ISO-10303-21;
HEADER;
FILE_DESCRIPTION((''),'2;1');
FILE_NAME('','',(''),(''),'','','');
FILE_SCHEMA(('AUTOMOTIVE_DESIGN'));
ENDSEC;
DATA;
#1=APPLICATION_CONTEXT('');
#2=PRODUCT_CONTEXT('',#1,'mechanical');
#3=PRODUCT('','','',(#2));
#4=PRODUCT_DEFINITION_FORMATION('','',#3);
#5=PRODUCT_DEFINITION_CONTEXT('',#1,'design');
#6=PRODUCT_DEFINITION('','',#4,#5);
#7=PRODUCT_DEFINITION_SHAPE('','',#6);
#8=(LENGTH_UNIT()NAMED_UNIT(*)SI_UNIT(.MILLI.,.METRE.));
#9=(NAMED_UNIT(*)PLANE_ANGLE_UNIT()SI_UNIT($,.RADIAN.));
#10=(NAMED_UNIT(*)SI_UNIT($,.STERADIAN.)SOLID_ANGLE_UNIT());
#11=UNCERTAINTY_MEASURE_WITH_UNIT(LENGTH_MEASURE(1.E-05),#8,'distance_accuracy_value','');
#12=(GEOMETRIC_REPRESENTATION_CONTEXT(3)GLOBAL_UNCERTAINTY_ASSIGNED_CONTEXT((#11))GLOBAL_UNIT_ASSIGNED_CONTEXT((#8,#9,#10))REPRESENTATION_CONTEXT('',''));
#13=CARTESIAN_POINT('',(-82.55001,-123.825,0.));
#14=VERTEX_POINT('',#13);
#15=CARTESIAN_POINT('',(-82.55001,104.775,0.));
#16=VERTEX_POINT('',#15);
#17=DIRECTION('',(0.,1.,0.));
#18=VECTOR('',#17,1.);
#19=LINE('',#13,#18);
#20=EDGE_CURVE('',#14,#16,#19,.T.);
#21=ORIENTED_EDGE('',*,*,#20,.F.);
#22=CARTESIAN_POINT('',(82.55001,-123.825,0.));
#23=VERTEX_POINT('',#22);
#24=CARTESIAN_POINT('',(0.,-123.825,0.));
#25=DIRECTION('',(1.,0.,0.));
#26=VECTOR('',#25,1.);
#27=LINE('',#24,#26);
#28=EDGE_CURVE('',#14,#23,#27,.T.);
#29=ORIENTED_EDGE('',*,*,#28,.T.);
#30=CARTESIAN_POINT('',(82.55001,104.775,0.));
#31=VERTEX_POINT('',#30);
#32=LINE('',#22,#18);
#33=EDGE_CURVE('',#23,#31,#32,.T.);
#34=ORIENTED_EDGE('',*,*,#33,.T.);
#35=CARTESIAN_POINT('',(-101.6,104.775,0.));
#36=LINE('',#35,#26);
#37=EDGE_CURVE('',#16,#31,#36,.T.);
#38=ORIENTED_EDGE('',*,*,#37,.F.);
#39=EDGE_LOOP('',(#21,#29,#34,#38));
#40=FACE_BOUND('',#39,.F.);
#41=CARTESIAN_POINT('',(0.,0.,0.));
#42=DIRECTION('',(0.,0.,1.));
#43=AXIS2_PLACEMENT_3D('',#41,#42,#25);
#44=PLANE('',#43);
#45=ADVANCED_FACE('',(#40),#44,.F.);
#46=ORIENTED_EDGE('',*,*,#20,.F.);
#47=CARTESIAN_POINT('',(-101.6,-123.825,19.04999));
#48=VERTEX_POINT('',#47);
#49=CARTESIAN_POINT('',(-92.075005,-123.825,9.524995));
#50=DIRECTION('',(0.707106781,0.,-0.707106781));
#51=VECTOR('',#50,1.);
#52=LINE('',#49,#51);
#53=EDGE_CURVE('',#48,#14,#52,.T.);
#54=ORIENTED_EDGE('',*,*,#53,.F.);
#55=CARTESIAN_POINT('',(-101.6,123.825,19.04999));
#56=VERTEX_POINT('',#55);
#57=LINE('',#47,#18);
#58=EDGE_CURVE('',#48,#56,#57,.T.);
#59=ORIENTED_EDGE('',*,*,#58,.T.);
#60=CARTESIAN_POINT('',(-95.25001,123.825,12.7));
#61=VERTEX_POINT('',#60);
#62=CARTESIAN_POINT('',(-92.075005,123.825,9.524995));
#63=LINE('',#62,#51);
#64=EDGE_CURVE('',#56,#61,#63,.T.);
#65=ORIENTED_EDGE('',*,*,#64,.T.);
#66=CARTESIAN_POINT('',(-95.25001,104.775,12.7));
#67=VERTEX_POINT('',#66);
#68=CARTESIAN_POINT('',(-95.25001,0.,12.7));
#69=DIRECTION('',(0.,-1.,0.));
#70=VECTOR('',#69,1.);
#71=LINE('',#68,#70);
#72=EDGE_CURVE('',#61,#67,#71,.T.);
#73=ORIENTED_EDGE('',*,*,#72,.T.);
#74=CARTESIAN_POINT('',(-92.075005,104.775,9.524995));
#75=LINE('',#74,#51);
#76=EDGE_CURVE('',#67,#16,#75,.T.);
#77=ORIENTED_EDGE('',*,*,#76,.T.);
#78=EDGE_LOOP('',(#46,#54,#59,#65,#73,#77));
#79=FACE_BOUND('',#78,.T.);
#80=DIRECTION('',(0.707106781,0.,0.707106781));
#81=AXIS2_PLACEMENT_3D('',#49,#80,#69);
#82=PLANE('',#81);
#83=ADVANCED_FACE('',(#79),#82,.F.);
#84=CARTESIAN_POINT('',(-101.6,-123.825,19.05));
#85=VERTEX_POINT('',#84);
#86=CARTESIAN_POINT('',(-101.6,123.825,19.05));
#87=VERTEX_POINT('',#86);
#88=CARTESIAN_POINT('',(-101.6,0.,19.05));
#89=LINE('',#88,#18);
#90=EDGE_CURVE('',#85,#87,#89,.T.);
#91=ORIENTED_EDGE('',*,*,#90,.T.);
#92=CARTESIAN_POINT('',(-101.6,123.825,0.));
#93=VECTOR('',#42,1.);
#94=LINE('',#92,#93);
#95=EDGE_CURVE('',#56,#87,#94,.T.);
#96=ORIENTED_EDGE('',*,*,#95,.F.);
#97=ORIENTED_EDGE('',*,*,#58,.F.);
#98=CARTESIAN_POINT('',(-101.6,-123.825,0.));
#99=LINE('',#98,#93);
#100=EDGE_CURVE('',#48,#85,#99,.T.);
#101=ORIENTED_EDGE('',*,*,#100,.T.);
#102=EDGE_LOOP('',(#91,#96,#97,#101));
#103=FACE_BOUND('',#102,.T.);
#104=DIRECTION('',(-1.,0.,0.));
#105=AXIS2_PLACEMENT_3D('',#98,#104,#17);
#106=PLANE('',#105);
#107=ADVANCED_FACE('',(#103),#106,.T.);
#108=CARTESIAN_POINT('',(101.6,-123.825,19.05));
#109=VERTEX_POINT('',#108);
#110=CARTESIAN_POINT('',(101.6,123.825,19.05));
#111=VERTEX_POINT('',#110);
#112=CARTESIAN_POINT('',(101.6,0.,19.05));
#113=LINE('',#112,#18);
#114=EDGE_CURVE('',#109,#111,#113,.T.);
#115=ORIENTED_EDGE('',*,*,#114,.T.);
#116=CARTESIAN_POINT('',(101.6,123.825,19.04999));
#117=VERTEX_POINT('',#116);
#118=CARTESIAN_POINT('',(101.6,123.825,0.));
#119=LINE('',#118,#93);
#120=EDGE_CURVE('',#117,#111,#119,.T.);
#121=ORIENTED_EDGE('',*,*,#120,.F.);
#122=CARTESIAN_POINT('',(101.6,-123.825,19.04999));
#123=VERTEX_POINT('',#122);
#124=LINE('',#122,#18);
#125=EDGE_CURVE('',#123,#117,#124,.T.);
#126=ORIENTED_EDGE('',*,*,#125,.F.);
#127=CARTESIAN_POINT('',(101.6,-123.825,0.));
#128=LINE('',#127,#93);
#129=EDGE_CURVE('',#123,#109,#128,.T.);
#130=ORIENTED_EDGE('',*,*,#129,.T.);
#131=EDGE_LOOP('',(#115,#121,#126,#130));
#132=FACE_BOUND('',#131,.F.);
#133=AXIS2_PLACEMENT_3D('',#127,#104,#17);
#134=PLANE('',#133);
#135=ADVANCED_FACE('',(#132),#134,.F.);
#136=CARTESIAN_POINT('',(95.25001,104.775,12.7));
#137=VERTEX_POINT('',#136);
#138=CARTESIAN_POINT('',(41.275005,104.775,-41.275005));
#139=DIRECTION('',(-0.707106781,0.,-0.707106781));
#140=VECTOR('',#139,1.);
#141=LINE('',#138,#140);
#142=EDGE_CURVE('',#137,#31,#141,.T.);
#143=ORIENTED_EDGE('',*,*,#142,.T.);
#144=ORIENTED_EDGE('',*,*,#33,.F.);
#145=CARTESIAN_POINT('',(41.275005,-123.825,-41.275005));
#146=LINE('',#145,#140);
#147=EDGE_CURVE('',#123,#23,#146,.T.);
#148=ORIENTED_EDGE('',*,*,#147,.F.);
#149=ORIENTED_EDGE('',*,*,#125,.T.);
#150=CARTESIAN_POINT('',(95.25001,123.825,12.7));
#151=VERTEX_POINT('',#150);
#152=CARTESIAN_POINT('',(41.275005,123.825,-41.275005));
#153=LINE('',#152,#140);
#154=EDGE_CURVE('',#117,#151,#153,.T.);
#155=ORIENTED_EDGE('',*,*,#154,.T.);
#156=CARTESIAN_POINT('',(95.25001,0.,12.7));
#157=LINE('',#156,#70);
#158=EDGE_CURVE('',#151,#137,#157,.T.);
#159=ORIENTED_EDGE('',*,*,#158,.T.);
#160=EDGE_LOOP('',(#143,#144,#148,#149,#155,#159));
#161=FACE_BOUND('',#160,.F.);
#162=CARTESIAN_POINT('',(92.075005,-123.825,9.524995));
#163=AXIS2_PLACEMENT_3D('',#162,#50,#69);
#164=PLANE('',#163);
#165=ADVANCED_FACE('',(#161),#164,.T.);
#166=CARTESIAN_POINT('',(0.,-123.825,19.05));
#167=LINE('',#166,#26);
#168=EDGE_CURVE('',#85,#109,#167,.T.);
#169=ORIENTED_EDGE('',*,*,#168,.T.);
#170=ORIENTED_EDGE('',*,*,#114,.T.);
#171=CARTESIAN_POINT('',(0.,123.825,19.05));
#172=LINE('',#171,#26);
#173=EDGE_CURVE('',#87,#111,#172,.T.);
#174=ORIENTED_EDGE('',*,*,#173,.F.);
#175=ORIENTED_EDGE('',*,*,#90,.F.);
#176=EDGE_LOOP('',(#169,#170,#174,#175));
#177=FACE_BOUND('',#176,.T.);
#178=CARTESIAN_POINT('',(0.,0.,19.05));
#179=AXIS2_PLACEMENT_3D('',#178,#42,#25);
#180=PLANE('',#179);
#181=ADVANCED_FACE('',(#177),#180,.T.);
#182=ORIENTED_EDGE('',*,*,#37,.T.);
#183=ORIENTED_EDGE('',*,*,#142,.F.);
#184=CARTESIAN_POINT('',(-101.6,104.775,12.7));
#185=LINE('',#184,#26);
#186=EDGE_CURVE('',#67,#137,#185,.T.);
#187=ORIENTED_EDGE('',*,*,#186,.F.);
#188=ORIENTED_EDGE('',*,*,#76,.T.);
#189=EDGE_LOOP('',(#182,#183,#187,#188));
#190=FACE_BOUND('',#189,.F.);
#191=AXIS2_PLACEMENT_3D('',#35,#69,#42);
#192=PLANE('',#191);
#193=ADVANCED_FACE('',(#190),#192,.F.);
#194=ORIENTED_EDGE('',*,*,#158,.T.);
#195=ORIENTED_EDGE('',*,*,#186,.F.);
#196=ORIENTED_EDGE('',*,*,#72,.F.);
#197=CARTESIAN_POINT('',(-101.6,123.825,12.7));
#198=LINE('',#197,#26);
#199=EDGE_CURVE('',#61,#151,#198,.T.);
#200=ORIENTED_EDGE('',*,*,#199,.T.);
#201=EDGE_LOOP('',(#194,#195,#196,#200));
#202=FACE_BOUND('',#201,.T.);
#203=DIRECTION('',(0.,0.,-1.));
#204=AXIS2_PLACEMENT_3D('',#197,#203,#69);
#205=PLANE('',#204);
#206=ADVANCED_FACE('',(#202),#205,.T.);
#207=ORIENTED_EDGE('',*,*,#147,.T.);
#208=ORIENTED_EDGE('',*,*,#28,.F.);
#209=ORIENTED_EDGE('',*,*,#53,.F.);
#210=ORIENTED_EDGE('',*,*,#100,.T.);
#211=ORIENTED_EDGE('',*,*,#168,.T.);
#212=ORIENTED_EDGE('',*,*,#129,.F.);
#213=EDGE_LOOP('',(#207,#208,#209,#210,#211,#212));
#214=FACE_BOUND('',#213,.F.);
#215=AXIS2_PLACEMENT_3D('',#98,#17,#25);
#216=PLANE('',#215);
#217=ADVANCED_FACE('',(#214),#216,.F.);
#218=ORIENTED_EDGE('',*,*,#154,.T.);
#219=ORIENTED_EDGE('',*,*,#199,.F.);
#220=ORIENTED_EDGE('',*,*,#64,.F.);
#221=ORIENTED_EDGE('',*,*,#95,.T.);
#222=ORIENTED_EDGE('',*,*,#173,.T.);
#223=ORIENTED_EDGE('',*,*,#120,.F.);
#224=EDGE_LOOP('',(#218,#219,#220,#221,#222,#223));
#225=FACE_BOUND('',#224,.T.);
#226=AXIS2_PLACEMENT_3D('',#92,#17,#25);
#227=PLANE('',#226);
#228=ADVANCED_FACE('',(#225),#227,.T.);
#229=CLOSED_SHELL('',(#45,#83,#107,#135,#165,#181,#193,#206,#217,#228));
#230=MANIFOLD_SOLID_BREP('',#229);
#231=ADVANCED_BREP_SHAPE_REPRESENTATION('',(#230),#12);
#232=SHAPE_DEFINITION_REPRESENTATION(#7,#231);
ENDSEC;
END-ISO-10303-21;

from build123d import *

# Parameters (mm, degrees)
F0_W     = 203.2
F0_H     = 247.65
F1_DEPTH = 19.05
F2_W     = 19.05
F2_H     = 12.7
F3_DEPTH = 203.201
F4_SIZE  = 19.04999
F5_SIZE  = 19.04999


# Not quite as in the source:
# - a fillet or chamfer is up to 0.001 mm smaller than in the source, because OpenCascade refuses the exact size


with BuildPart() as f1:
    # F0 (on Top) → F1 (new body)
    with BuildSketch(Plane.XY):
        Rectangle(F0_W, F0_H)
    extrude(amount=F1_DEPTH)

    # F2 (on face) → F3 (cut, through all)
    with BuildSketch(Plane(origin=(-101.6, 0, 0), x_dir=(0, -1, 0), z_dir=(-1, 0, 0))):
        with Locations((-114.3, 6.35)):
            Rectangle(F2_W, F2_H)
    extrude(amount=-F3_DEPTH, mode=Mode.SUBTRACT)

    # F4 (size 19.05 in the source; OpenCascade refuses exactly that, so slightly less here)
    f4_edges = [f1.edges().sort_by_distance(p)[0] for p in [
        (-101.6, -9.525, 0),
    ]]
    chamfer(f4_edges, length=F4_SIZE)

    # F5 (size 19.05 in the source; OpenCascade refuses exactly that, so slightly less here)
    f5_edges = [f1.edges().sort_by_distance(p)[0] for p in [
        (101.6, -9.525, 0),
    ]]
    chamfer(f5_edges, length=F5_SIZE)


solid = f1.part
